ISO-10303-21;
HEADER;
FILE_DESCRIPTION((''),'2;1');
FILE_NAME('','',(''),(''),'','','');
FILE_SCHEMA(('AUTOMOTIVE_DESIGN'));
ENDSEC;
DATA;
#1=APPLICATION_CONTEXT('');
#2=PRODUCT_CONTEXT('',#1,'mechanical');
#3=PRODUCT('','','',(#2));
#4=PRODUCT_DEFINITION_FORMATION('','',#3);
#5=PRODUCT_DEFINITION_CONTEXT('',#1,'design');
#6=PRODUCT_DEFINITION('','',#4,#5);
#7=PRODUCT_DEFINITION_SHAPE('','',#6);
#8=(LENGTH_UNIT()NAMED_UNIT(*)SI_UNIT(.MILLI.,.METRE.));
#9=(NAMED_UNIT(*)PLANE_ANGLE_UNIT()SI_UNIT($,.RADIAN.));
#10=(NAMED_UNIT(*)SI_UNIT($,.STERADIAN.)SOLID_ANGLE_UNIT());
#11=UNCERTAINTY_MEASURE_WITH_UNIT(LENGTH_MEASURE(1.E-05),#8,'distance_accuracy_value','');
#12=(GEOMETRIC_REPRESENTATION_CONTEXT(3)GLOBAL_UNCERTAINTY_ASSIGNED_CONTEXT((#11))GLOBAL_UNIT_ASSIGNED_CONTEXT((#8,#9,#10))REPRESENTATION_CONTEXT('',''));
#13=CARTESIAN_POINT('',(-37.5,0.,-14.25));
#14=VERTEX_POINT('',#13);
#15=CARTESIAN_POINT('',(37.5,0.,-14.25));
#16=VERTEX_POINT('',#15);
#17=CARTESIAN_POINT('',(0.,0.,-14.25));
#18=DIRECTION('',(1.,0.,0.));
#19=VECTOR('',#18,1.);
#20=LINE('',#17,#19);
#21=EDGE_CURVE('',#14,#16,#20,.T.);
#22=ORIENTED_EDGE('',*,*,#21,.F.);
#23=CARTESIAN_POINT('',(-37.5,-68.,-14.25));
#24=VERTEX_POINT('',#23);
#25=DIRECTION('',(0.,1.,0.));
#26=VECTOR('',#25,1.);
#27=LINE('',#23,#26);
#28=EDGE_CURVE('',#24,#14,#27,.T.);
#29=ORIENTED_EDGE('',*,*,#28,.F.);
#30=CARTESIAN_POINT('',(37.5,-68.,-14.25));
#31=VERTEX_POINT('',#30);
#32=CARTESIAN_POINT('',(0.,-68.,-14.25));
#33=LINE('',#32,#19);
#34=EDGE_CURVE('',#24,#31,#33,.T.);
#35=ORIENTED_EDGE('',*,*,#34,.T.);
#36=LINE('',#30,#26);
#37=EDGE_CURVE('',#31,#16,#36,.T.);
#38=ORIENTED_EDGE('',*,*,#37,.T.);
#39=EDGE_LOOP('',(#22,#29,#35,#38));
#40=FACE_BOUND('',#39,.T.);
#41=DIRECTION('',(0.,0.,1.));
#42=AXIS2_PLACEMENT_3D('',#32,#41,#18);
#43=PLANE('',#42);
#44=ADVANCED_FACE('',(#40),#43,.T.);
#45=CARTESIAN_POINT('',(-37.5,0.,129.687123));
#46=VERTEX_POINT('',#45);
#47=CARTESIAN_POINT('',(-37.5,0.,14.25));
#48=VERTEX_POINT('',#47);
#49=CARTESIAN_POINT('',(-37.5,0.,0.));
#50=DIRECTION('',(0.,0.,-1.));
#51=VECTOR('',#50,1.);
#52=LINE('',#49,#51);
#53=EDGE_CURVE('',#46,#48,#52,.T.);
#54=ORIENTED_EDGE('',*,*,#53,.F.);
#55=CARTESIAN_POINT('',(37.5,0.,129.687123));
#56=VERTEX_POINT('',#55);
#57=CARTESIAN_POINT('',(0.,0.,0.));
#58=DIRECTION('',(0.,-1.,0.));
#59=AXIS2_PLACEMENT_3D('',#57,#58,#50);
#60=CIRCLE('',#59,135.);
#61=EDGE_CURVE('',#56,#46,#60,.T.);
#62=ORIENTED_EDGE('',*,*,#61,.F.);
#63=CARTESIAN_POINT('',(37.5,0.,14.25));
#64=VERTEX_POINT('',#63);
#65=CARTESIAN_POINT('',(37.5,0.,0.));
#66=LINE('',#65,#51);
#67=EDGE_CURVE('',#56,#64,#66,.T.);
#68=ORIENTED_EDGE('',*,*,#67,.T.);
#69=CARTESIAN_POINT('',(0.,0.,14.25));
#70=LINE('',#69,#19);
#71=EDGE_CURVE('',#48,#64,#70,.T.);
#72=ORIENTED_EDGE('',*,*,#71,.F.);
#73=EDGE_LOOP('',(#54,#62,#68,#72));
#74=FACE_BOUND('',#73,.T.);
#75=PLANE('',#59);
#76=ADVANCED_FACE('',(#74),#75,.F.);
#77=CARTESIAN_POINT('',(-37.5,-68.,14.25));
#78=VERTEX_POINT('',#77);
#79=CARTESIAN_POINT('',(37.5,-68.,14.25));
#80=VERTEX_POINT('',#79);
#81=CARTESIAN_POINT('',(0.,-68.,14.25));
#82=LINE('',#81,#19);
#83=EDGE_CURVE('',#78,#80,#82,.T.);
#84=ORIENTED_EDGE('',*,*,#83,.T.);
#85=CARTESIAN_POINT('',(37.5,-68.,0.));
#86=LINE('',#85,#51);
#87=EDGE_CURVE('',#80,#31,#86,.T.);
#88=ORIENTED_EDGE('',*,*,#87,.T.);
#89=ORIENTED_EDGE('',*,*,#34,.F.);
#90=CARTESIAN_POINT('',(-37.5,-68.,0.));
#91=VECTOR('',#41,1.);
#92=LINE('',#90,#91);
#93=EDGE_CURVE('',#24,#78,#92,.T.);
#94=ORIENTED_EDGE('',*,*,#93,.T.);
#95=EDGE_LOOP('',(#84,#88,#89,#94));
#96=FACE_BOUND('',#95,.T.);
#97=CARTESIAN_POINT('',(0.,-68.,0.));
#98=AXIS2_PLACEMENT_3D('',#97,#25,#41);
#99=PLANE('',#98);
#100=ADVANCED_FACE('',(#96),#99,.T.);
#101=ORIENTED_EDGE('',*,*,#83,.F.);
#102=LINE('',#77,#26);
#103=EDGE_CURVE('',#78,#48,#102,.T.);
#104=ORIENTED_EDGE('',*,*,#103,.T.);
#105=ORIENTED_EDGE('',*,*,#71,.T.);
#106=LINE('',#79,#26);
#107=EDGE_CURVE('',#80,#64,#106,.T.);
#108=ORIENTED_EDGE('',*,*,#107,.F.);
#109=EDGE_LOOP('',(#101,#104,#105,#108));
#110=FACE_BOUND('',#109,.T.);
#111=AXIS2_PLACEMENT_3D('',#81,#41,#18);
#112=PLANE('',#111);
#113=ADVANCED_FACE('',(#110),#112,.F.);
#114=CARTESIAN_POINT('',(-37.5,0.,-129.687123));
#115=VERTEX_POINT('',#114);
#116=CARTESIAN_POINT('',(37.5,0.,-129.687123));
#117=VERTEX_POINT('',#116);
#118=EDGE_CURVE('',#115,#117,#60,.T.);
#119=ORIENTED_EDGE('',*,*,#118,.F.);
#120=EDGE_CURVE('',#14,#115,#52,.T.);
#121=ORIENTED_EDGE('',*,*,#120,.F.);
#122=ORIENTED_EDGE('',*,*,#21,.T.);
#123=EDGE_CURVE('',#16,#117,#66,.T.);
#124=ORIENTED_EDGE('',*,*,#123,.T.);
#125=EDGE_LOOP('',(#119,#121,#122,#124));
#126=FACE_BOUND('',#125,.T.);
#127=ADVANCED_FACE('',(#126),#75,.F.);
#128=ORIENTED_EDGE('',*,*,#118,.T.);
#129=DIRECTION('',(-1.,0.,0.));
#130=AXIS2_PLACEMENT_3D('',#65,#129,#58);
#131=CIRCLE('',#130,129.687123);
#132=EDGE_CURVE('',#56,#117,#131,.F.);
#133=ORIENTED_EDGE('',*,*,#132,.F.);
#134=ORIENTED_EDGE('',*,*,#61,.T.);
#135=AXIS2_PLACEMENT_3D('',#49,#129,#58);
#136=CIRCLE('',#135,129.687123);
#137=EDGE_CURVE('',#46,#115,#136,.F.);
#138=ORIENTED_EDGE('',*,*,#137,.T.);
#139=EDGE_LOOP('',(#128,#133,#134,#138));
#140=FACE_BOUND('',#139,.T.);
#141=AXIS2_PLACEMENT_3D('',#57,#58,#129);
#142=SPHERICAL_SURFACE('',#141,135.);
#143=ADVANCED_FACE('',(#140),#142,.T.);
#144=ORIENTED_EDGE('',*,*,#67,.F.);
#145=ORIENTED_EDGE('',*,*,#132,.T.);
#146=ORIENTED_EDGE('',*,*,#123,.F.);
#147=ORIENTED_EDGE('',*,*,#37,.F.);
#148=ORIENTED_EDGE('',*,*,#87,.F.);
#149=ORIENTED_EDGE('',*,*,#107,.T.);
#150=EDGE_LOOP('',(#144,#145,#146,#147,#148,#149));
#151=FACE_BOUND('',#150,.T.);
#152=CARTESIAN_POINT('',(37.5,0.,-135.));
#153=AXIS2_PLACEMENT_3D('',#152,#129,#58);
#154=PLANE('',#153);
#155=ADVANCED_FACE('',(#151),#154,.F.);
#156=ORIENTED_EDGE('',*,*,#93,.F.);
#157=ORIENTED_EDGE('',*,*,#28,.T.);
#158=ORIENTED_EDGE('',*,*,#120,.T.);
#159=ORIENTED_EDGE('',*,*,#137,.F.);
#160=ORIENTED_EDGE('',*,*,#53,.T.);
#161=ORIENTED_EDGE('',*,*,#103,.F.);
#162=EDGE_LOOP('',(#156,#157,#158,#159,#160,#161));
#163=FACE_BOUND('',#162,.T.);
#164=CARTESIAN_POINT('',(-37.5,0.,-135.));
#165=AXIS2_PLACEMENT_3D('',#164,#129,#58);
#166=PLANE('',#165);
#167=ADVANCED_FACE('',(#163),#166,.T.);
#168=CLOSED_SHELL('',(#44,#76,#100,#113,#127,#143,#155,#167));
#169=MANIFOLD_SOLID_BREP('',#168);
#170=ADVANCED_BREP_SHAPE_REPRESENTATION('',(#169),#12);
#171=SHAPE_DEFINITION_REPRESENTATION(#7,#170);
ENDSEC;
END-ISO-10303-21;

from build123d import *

# Parameters (mm, degrees)
CUT_EXTRUDE2_DEPTH = 331.681115276
SKETCH3_W          = 75
SKETCH3_H          = 28.5
CUT_EXTRUDE3_DEPTH = 68


with BuildPart() as part:
    # Sketch1 → Revolve2 (revolve)
    with BuildSketch(Plane.XY):
        with BuildLine():
            Line((135, 0), (0, 0))
            Line((0, 0), (0, -135))
            ThreePointArc((0, -135), (95.45941546, -95.45941546), (135, 0))
        make_face()
    revolve(axis=Axis((0, 0, 0), (0, 1, 0)))

    # Sketch2 → Cut-Extrude2 (cut, through all)
    with BuildSketch(Plane.XY.offset(135)):
        with BuildLine():
            Line((-37.5, -129.687123493), (-37.5, 0))
            Line((-37.5, 0), (0, 0))
            Line((0, 0), (37.5, 0))
            Line((37.5, 0), (37.5, -129.687123493))
            ThreePointArc((37.5, -129.687123493), (107.906209275, -81.124903698), (135, 0))
            ThreePointArc((135, 0), (-81.124903698, 107.906209275), (-37.5, -129.687123493))
        make_face()
    extrude(amount=-CUT_EXTRUDE2_DEPTH, mode=Mode.SUBTRACT)

    # Sketch3 → Cut-Extrude3 (cut)
    with BuildSketch(Plane(origin=(0, 0, 0), x_dir=(1, 0, 0), z_dir=(0, 1, 0))):
        Rectangle(SKETCH3_W, SKETCH3_H)
    extrude(amount=-CUT_EXTRUDE3_DEPTH, mode=Mode.SUBTRACT)


solid = part.part
